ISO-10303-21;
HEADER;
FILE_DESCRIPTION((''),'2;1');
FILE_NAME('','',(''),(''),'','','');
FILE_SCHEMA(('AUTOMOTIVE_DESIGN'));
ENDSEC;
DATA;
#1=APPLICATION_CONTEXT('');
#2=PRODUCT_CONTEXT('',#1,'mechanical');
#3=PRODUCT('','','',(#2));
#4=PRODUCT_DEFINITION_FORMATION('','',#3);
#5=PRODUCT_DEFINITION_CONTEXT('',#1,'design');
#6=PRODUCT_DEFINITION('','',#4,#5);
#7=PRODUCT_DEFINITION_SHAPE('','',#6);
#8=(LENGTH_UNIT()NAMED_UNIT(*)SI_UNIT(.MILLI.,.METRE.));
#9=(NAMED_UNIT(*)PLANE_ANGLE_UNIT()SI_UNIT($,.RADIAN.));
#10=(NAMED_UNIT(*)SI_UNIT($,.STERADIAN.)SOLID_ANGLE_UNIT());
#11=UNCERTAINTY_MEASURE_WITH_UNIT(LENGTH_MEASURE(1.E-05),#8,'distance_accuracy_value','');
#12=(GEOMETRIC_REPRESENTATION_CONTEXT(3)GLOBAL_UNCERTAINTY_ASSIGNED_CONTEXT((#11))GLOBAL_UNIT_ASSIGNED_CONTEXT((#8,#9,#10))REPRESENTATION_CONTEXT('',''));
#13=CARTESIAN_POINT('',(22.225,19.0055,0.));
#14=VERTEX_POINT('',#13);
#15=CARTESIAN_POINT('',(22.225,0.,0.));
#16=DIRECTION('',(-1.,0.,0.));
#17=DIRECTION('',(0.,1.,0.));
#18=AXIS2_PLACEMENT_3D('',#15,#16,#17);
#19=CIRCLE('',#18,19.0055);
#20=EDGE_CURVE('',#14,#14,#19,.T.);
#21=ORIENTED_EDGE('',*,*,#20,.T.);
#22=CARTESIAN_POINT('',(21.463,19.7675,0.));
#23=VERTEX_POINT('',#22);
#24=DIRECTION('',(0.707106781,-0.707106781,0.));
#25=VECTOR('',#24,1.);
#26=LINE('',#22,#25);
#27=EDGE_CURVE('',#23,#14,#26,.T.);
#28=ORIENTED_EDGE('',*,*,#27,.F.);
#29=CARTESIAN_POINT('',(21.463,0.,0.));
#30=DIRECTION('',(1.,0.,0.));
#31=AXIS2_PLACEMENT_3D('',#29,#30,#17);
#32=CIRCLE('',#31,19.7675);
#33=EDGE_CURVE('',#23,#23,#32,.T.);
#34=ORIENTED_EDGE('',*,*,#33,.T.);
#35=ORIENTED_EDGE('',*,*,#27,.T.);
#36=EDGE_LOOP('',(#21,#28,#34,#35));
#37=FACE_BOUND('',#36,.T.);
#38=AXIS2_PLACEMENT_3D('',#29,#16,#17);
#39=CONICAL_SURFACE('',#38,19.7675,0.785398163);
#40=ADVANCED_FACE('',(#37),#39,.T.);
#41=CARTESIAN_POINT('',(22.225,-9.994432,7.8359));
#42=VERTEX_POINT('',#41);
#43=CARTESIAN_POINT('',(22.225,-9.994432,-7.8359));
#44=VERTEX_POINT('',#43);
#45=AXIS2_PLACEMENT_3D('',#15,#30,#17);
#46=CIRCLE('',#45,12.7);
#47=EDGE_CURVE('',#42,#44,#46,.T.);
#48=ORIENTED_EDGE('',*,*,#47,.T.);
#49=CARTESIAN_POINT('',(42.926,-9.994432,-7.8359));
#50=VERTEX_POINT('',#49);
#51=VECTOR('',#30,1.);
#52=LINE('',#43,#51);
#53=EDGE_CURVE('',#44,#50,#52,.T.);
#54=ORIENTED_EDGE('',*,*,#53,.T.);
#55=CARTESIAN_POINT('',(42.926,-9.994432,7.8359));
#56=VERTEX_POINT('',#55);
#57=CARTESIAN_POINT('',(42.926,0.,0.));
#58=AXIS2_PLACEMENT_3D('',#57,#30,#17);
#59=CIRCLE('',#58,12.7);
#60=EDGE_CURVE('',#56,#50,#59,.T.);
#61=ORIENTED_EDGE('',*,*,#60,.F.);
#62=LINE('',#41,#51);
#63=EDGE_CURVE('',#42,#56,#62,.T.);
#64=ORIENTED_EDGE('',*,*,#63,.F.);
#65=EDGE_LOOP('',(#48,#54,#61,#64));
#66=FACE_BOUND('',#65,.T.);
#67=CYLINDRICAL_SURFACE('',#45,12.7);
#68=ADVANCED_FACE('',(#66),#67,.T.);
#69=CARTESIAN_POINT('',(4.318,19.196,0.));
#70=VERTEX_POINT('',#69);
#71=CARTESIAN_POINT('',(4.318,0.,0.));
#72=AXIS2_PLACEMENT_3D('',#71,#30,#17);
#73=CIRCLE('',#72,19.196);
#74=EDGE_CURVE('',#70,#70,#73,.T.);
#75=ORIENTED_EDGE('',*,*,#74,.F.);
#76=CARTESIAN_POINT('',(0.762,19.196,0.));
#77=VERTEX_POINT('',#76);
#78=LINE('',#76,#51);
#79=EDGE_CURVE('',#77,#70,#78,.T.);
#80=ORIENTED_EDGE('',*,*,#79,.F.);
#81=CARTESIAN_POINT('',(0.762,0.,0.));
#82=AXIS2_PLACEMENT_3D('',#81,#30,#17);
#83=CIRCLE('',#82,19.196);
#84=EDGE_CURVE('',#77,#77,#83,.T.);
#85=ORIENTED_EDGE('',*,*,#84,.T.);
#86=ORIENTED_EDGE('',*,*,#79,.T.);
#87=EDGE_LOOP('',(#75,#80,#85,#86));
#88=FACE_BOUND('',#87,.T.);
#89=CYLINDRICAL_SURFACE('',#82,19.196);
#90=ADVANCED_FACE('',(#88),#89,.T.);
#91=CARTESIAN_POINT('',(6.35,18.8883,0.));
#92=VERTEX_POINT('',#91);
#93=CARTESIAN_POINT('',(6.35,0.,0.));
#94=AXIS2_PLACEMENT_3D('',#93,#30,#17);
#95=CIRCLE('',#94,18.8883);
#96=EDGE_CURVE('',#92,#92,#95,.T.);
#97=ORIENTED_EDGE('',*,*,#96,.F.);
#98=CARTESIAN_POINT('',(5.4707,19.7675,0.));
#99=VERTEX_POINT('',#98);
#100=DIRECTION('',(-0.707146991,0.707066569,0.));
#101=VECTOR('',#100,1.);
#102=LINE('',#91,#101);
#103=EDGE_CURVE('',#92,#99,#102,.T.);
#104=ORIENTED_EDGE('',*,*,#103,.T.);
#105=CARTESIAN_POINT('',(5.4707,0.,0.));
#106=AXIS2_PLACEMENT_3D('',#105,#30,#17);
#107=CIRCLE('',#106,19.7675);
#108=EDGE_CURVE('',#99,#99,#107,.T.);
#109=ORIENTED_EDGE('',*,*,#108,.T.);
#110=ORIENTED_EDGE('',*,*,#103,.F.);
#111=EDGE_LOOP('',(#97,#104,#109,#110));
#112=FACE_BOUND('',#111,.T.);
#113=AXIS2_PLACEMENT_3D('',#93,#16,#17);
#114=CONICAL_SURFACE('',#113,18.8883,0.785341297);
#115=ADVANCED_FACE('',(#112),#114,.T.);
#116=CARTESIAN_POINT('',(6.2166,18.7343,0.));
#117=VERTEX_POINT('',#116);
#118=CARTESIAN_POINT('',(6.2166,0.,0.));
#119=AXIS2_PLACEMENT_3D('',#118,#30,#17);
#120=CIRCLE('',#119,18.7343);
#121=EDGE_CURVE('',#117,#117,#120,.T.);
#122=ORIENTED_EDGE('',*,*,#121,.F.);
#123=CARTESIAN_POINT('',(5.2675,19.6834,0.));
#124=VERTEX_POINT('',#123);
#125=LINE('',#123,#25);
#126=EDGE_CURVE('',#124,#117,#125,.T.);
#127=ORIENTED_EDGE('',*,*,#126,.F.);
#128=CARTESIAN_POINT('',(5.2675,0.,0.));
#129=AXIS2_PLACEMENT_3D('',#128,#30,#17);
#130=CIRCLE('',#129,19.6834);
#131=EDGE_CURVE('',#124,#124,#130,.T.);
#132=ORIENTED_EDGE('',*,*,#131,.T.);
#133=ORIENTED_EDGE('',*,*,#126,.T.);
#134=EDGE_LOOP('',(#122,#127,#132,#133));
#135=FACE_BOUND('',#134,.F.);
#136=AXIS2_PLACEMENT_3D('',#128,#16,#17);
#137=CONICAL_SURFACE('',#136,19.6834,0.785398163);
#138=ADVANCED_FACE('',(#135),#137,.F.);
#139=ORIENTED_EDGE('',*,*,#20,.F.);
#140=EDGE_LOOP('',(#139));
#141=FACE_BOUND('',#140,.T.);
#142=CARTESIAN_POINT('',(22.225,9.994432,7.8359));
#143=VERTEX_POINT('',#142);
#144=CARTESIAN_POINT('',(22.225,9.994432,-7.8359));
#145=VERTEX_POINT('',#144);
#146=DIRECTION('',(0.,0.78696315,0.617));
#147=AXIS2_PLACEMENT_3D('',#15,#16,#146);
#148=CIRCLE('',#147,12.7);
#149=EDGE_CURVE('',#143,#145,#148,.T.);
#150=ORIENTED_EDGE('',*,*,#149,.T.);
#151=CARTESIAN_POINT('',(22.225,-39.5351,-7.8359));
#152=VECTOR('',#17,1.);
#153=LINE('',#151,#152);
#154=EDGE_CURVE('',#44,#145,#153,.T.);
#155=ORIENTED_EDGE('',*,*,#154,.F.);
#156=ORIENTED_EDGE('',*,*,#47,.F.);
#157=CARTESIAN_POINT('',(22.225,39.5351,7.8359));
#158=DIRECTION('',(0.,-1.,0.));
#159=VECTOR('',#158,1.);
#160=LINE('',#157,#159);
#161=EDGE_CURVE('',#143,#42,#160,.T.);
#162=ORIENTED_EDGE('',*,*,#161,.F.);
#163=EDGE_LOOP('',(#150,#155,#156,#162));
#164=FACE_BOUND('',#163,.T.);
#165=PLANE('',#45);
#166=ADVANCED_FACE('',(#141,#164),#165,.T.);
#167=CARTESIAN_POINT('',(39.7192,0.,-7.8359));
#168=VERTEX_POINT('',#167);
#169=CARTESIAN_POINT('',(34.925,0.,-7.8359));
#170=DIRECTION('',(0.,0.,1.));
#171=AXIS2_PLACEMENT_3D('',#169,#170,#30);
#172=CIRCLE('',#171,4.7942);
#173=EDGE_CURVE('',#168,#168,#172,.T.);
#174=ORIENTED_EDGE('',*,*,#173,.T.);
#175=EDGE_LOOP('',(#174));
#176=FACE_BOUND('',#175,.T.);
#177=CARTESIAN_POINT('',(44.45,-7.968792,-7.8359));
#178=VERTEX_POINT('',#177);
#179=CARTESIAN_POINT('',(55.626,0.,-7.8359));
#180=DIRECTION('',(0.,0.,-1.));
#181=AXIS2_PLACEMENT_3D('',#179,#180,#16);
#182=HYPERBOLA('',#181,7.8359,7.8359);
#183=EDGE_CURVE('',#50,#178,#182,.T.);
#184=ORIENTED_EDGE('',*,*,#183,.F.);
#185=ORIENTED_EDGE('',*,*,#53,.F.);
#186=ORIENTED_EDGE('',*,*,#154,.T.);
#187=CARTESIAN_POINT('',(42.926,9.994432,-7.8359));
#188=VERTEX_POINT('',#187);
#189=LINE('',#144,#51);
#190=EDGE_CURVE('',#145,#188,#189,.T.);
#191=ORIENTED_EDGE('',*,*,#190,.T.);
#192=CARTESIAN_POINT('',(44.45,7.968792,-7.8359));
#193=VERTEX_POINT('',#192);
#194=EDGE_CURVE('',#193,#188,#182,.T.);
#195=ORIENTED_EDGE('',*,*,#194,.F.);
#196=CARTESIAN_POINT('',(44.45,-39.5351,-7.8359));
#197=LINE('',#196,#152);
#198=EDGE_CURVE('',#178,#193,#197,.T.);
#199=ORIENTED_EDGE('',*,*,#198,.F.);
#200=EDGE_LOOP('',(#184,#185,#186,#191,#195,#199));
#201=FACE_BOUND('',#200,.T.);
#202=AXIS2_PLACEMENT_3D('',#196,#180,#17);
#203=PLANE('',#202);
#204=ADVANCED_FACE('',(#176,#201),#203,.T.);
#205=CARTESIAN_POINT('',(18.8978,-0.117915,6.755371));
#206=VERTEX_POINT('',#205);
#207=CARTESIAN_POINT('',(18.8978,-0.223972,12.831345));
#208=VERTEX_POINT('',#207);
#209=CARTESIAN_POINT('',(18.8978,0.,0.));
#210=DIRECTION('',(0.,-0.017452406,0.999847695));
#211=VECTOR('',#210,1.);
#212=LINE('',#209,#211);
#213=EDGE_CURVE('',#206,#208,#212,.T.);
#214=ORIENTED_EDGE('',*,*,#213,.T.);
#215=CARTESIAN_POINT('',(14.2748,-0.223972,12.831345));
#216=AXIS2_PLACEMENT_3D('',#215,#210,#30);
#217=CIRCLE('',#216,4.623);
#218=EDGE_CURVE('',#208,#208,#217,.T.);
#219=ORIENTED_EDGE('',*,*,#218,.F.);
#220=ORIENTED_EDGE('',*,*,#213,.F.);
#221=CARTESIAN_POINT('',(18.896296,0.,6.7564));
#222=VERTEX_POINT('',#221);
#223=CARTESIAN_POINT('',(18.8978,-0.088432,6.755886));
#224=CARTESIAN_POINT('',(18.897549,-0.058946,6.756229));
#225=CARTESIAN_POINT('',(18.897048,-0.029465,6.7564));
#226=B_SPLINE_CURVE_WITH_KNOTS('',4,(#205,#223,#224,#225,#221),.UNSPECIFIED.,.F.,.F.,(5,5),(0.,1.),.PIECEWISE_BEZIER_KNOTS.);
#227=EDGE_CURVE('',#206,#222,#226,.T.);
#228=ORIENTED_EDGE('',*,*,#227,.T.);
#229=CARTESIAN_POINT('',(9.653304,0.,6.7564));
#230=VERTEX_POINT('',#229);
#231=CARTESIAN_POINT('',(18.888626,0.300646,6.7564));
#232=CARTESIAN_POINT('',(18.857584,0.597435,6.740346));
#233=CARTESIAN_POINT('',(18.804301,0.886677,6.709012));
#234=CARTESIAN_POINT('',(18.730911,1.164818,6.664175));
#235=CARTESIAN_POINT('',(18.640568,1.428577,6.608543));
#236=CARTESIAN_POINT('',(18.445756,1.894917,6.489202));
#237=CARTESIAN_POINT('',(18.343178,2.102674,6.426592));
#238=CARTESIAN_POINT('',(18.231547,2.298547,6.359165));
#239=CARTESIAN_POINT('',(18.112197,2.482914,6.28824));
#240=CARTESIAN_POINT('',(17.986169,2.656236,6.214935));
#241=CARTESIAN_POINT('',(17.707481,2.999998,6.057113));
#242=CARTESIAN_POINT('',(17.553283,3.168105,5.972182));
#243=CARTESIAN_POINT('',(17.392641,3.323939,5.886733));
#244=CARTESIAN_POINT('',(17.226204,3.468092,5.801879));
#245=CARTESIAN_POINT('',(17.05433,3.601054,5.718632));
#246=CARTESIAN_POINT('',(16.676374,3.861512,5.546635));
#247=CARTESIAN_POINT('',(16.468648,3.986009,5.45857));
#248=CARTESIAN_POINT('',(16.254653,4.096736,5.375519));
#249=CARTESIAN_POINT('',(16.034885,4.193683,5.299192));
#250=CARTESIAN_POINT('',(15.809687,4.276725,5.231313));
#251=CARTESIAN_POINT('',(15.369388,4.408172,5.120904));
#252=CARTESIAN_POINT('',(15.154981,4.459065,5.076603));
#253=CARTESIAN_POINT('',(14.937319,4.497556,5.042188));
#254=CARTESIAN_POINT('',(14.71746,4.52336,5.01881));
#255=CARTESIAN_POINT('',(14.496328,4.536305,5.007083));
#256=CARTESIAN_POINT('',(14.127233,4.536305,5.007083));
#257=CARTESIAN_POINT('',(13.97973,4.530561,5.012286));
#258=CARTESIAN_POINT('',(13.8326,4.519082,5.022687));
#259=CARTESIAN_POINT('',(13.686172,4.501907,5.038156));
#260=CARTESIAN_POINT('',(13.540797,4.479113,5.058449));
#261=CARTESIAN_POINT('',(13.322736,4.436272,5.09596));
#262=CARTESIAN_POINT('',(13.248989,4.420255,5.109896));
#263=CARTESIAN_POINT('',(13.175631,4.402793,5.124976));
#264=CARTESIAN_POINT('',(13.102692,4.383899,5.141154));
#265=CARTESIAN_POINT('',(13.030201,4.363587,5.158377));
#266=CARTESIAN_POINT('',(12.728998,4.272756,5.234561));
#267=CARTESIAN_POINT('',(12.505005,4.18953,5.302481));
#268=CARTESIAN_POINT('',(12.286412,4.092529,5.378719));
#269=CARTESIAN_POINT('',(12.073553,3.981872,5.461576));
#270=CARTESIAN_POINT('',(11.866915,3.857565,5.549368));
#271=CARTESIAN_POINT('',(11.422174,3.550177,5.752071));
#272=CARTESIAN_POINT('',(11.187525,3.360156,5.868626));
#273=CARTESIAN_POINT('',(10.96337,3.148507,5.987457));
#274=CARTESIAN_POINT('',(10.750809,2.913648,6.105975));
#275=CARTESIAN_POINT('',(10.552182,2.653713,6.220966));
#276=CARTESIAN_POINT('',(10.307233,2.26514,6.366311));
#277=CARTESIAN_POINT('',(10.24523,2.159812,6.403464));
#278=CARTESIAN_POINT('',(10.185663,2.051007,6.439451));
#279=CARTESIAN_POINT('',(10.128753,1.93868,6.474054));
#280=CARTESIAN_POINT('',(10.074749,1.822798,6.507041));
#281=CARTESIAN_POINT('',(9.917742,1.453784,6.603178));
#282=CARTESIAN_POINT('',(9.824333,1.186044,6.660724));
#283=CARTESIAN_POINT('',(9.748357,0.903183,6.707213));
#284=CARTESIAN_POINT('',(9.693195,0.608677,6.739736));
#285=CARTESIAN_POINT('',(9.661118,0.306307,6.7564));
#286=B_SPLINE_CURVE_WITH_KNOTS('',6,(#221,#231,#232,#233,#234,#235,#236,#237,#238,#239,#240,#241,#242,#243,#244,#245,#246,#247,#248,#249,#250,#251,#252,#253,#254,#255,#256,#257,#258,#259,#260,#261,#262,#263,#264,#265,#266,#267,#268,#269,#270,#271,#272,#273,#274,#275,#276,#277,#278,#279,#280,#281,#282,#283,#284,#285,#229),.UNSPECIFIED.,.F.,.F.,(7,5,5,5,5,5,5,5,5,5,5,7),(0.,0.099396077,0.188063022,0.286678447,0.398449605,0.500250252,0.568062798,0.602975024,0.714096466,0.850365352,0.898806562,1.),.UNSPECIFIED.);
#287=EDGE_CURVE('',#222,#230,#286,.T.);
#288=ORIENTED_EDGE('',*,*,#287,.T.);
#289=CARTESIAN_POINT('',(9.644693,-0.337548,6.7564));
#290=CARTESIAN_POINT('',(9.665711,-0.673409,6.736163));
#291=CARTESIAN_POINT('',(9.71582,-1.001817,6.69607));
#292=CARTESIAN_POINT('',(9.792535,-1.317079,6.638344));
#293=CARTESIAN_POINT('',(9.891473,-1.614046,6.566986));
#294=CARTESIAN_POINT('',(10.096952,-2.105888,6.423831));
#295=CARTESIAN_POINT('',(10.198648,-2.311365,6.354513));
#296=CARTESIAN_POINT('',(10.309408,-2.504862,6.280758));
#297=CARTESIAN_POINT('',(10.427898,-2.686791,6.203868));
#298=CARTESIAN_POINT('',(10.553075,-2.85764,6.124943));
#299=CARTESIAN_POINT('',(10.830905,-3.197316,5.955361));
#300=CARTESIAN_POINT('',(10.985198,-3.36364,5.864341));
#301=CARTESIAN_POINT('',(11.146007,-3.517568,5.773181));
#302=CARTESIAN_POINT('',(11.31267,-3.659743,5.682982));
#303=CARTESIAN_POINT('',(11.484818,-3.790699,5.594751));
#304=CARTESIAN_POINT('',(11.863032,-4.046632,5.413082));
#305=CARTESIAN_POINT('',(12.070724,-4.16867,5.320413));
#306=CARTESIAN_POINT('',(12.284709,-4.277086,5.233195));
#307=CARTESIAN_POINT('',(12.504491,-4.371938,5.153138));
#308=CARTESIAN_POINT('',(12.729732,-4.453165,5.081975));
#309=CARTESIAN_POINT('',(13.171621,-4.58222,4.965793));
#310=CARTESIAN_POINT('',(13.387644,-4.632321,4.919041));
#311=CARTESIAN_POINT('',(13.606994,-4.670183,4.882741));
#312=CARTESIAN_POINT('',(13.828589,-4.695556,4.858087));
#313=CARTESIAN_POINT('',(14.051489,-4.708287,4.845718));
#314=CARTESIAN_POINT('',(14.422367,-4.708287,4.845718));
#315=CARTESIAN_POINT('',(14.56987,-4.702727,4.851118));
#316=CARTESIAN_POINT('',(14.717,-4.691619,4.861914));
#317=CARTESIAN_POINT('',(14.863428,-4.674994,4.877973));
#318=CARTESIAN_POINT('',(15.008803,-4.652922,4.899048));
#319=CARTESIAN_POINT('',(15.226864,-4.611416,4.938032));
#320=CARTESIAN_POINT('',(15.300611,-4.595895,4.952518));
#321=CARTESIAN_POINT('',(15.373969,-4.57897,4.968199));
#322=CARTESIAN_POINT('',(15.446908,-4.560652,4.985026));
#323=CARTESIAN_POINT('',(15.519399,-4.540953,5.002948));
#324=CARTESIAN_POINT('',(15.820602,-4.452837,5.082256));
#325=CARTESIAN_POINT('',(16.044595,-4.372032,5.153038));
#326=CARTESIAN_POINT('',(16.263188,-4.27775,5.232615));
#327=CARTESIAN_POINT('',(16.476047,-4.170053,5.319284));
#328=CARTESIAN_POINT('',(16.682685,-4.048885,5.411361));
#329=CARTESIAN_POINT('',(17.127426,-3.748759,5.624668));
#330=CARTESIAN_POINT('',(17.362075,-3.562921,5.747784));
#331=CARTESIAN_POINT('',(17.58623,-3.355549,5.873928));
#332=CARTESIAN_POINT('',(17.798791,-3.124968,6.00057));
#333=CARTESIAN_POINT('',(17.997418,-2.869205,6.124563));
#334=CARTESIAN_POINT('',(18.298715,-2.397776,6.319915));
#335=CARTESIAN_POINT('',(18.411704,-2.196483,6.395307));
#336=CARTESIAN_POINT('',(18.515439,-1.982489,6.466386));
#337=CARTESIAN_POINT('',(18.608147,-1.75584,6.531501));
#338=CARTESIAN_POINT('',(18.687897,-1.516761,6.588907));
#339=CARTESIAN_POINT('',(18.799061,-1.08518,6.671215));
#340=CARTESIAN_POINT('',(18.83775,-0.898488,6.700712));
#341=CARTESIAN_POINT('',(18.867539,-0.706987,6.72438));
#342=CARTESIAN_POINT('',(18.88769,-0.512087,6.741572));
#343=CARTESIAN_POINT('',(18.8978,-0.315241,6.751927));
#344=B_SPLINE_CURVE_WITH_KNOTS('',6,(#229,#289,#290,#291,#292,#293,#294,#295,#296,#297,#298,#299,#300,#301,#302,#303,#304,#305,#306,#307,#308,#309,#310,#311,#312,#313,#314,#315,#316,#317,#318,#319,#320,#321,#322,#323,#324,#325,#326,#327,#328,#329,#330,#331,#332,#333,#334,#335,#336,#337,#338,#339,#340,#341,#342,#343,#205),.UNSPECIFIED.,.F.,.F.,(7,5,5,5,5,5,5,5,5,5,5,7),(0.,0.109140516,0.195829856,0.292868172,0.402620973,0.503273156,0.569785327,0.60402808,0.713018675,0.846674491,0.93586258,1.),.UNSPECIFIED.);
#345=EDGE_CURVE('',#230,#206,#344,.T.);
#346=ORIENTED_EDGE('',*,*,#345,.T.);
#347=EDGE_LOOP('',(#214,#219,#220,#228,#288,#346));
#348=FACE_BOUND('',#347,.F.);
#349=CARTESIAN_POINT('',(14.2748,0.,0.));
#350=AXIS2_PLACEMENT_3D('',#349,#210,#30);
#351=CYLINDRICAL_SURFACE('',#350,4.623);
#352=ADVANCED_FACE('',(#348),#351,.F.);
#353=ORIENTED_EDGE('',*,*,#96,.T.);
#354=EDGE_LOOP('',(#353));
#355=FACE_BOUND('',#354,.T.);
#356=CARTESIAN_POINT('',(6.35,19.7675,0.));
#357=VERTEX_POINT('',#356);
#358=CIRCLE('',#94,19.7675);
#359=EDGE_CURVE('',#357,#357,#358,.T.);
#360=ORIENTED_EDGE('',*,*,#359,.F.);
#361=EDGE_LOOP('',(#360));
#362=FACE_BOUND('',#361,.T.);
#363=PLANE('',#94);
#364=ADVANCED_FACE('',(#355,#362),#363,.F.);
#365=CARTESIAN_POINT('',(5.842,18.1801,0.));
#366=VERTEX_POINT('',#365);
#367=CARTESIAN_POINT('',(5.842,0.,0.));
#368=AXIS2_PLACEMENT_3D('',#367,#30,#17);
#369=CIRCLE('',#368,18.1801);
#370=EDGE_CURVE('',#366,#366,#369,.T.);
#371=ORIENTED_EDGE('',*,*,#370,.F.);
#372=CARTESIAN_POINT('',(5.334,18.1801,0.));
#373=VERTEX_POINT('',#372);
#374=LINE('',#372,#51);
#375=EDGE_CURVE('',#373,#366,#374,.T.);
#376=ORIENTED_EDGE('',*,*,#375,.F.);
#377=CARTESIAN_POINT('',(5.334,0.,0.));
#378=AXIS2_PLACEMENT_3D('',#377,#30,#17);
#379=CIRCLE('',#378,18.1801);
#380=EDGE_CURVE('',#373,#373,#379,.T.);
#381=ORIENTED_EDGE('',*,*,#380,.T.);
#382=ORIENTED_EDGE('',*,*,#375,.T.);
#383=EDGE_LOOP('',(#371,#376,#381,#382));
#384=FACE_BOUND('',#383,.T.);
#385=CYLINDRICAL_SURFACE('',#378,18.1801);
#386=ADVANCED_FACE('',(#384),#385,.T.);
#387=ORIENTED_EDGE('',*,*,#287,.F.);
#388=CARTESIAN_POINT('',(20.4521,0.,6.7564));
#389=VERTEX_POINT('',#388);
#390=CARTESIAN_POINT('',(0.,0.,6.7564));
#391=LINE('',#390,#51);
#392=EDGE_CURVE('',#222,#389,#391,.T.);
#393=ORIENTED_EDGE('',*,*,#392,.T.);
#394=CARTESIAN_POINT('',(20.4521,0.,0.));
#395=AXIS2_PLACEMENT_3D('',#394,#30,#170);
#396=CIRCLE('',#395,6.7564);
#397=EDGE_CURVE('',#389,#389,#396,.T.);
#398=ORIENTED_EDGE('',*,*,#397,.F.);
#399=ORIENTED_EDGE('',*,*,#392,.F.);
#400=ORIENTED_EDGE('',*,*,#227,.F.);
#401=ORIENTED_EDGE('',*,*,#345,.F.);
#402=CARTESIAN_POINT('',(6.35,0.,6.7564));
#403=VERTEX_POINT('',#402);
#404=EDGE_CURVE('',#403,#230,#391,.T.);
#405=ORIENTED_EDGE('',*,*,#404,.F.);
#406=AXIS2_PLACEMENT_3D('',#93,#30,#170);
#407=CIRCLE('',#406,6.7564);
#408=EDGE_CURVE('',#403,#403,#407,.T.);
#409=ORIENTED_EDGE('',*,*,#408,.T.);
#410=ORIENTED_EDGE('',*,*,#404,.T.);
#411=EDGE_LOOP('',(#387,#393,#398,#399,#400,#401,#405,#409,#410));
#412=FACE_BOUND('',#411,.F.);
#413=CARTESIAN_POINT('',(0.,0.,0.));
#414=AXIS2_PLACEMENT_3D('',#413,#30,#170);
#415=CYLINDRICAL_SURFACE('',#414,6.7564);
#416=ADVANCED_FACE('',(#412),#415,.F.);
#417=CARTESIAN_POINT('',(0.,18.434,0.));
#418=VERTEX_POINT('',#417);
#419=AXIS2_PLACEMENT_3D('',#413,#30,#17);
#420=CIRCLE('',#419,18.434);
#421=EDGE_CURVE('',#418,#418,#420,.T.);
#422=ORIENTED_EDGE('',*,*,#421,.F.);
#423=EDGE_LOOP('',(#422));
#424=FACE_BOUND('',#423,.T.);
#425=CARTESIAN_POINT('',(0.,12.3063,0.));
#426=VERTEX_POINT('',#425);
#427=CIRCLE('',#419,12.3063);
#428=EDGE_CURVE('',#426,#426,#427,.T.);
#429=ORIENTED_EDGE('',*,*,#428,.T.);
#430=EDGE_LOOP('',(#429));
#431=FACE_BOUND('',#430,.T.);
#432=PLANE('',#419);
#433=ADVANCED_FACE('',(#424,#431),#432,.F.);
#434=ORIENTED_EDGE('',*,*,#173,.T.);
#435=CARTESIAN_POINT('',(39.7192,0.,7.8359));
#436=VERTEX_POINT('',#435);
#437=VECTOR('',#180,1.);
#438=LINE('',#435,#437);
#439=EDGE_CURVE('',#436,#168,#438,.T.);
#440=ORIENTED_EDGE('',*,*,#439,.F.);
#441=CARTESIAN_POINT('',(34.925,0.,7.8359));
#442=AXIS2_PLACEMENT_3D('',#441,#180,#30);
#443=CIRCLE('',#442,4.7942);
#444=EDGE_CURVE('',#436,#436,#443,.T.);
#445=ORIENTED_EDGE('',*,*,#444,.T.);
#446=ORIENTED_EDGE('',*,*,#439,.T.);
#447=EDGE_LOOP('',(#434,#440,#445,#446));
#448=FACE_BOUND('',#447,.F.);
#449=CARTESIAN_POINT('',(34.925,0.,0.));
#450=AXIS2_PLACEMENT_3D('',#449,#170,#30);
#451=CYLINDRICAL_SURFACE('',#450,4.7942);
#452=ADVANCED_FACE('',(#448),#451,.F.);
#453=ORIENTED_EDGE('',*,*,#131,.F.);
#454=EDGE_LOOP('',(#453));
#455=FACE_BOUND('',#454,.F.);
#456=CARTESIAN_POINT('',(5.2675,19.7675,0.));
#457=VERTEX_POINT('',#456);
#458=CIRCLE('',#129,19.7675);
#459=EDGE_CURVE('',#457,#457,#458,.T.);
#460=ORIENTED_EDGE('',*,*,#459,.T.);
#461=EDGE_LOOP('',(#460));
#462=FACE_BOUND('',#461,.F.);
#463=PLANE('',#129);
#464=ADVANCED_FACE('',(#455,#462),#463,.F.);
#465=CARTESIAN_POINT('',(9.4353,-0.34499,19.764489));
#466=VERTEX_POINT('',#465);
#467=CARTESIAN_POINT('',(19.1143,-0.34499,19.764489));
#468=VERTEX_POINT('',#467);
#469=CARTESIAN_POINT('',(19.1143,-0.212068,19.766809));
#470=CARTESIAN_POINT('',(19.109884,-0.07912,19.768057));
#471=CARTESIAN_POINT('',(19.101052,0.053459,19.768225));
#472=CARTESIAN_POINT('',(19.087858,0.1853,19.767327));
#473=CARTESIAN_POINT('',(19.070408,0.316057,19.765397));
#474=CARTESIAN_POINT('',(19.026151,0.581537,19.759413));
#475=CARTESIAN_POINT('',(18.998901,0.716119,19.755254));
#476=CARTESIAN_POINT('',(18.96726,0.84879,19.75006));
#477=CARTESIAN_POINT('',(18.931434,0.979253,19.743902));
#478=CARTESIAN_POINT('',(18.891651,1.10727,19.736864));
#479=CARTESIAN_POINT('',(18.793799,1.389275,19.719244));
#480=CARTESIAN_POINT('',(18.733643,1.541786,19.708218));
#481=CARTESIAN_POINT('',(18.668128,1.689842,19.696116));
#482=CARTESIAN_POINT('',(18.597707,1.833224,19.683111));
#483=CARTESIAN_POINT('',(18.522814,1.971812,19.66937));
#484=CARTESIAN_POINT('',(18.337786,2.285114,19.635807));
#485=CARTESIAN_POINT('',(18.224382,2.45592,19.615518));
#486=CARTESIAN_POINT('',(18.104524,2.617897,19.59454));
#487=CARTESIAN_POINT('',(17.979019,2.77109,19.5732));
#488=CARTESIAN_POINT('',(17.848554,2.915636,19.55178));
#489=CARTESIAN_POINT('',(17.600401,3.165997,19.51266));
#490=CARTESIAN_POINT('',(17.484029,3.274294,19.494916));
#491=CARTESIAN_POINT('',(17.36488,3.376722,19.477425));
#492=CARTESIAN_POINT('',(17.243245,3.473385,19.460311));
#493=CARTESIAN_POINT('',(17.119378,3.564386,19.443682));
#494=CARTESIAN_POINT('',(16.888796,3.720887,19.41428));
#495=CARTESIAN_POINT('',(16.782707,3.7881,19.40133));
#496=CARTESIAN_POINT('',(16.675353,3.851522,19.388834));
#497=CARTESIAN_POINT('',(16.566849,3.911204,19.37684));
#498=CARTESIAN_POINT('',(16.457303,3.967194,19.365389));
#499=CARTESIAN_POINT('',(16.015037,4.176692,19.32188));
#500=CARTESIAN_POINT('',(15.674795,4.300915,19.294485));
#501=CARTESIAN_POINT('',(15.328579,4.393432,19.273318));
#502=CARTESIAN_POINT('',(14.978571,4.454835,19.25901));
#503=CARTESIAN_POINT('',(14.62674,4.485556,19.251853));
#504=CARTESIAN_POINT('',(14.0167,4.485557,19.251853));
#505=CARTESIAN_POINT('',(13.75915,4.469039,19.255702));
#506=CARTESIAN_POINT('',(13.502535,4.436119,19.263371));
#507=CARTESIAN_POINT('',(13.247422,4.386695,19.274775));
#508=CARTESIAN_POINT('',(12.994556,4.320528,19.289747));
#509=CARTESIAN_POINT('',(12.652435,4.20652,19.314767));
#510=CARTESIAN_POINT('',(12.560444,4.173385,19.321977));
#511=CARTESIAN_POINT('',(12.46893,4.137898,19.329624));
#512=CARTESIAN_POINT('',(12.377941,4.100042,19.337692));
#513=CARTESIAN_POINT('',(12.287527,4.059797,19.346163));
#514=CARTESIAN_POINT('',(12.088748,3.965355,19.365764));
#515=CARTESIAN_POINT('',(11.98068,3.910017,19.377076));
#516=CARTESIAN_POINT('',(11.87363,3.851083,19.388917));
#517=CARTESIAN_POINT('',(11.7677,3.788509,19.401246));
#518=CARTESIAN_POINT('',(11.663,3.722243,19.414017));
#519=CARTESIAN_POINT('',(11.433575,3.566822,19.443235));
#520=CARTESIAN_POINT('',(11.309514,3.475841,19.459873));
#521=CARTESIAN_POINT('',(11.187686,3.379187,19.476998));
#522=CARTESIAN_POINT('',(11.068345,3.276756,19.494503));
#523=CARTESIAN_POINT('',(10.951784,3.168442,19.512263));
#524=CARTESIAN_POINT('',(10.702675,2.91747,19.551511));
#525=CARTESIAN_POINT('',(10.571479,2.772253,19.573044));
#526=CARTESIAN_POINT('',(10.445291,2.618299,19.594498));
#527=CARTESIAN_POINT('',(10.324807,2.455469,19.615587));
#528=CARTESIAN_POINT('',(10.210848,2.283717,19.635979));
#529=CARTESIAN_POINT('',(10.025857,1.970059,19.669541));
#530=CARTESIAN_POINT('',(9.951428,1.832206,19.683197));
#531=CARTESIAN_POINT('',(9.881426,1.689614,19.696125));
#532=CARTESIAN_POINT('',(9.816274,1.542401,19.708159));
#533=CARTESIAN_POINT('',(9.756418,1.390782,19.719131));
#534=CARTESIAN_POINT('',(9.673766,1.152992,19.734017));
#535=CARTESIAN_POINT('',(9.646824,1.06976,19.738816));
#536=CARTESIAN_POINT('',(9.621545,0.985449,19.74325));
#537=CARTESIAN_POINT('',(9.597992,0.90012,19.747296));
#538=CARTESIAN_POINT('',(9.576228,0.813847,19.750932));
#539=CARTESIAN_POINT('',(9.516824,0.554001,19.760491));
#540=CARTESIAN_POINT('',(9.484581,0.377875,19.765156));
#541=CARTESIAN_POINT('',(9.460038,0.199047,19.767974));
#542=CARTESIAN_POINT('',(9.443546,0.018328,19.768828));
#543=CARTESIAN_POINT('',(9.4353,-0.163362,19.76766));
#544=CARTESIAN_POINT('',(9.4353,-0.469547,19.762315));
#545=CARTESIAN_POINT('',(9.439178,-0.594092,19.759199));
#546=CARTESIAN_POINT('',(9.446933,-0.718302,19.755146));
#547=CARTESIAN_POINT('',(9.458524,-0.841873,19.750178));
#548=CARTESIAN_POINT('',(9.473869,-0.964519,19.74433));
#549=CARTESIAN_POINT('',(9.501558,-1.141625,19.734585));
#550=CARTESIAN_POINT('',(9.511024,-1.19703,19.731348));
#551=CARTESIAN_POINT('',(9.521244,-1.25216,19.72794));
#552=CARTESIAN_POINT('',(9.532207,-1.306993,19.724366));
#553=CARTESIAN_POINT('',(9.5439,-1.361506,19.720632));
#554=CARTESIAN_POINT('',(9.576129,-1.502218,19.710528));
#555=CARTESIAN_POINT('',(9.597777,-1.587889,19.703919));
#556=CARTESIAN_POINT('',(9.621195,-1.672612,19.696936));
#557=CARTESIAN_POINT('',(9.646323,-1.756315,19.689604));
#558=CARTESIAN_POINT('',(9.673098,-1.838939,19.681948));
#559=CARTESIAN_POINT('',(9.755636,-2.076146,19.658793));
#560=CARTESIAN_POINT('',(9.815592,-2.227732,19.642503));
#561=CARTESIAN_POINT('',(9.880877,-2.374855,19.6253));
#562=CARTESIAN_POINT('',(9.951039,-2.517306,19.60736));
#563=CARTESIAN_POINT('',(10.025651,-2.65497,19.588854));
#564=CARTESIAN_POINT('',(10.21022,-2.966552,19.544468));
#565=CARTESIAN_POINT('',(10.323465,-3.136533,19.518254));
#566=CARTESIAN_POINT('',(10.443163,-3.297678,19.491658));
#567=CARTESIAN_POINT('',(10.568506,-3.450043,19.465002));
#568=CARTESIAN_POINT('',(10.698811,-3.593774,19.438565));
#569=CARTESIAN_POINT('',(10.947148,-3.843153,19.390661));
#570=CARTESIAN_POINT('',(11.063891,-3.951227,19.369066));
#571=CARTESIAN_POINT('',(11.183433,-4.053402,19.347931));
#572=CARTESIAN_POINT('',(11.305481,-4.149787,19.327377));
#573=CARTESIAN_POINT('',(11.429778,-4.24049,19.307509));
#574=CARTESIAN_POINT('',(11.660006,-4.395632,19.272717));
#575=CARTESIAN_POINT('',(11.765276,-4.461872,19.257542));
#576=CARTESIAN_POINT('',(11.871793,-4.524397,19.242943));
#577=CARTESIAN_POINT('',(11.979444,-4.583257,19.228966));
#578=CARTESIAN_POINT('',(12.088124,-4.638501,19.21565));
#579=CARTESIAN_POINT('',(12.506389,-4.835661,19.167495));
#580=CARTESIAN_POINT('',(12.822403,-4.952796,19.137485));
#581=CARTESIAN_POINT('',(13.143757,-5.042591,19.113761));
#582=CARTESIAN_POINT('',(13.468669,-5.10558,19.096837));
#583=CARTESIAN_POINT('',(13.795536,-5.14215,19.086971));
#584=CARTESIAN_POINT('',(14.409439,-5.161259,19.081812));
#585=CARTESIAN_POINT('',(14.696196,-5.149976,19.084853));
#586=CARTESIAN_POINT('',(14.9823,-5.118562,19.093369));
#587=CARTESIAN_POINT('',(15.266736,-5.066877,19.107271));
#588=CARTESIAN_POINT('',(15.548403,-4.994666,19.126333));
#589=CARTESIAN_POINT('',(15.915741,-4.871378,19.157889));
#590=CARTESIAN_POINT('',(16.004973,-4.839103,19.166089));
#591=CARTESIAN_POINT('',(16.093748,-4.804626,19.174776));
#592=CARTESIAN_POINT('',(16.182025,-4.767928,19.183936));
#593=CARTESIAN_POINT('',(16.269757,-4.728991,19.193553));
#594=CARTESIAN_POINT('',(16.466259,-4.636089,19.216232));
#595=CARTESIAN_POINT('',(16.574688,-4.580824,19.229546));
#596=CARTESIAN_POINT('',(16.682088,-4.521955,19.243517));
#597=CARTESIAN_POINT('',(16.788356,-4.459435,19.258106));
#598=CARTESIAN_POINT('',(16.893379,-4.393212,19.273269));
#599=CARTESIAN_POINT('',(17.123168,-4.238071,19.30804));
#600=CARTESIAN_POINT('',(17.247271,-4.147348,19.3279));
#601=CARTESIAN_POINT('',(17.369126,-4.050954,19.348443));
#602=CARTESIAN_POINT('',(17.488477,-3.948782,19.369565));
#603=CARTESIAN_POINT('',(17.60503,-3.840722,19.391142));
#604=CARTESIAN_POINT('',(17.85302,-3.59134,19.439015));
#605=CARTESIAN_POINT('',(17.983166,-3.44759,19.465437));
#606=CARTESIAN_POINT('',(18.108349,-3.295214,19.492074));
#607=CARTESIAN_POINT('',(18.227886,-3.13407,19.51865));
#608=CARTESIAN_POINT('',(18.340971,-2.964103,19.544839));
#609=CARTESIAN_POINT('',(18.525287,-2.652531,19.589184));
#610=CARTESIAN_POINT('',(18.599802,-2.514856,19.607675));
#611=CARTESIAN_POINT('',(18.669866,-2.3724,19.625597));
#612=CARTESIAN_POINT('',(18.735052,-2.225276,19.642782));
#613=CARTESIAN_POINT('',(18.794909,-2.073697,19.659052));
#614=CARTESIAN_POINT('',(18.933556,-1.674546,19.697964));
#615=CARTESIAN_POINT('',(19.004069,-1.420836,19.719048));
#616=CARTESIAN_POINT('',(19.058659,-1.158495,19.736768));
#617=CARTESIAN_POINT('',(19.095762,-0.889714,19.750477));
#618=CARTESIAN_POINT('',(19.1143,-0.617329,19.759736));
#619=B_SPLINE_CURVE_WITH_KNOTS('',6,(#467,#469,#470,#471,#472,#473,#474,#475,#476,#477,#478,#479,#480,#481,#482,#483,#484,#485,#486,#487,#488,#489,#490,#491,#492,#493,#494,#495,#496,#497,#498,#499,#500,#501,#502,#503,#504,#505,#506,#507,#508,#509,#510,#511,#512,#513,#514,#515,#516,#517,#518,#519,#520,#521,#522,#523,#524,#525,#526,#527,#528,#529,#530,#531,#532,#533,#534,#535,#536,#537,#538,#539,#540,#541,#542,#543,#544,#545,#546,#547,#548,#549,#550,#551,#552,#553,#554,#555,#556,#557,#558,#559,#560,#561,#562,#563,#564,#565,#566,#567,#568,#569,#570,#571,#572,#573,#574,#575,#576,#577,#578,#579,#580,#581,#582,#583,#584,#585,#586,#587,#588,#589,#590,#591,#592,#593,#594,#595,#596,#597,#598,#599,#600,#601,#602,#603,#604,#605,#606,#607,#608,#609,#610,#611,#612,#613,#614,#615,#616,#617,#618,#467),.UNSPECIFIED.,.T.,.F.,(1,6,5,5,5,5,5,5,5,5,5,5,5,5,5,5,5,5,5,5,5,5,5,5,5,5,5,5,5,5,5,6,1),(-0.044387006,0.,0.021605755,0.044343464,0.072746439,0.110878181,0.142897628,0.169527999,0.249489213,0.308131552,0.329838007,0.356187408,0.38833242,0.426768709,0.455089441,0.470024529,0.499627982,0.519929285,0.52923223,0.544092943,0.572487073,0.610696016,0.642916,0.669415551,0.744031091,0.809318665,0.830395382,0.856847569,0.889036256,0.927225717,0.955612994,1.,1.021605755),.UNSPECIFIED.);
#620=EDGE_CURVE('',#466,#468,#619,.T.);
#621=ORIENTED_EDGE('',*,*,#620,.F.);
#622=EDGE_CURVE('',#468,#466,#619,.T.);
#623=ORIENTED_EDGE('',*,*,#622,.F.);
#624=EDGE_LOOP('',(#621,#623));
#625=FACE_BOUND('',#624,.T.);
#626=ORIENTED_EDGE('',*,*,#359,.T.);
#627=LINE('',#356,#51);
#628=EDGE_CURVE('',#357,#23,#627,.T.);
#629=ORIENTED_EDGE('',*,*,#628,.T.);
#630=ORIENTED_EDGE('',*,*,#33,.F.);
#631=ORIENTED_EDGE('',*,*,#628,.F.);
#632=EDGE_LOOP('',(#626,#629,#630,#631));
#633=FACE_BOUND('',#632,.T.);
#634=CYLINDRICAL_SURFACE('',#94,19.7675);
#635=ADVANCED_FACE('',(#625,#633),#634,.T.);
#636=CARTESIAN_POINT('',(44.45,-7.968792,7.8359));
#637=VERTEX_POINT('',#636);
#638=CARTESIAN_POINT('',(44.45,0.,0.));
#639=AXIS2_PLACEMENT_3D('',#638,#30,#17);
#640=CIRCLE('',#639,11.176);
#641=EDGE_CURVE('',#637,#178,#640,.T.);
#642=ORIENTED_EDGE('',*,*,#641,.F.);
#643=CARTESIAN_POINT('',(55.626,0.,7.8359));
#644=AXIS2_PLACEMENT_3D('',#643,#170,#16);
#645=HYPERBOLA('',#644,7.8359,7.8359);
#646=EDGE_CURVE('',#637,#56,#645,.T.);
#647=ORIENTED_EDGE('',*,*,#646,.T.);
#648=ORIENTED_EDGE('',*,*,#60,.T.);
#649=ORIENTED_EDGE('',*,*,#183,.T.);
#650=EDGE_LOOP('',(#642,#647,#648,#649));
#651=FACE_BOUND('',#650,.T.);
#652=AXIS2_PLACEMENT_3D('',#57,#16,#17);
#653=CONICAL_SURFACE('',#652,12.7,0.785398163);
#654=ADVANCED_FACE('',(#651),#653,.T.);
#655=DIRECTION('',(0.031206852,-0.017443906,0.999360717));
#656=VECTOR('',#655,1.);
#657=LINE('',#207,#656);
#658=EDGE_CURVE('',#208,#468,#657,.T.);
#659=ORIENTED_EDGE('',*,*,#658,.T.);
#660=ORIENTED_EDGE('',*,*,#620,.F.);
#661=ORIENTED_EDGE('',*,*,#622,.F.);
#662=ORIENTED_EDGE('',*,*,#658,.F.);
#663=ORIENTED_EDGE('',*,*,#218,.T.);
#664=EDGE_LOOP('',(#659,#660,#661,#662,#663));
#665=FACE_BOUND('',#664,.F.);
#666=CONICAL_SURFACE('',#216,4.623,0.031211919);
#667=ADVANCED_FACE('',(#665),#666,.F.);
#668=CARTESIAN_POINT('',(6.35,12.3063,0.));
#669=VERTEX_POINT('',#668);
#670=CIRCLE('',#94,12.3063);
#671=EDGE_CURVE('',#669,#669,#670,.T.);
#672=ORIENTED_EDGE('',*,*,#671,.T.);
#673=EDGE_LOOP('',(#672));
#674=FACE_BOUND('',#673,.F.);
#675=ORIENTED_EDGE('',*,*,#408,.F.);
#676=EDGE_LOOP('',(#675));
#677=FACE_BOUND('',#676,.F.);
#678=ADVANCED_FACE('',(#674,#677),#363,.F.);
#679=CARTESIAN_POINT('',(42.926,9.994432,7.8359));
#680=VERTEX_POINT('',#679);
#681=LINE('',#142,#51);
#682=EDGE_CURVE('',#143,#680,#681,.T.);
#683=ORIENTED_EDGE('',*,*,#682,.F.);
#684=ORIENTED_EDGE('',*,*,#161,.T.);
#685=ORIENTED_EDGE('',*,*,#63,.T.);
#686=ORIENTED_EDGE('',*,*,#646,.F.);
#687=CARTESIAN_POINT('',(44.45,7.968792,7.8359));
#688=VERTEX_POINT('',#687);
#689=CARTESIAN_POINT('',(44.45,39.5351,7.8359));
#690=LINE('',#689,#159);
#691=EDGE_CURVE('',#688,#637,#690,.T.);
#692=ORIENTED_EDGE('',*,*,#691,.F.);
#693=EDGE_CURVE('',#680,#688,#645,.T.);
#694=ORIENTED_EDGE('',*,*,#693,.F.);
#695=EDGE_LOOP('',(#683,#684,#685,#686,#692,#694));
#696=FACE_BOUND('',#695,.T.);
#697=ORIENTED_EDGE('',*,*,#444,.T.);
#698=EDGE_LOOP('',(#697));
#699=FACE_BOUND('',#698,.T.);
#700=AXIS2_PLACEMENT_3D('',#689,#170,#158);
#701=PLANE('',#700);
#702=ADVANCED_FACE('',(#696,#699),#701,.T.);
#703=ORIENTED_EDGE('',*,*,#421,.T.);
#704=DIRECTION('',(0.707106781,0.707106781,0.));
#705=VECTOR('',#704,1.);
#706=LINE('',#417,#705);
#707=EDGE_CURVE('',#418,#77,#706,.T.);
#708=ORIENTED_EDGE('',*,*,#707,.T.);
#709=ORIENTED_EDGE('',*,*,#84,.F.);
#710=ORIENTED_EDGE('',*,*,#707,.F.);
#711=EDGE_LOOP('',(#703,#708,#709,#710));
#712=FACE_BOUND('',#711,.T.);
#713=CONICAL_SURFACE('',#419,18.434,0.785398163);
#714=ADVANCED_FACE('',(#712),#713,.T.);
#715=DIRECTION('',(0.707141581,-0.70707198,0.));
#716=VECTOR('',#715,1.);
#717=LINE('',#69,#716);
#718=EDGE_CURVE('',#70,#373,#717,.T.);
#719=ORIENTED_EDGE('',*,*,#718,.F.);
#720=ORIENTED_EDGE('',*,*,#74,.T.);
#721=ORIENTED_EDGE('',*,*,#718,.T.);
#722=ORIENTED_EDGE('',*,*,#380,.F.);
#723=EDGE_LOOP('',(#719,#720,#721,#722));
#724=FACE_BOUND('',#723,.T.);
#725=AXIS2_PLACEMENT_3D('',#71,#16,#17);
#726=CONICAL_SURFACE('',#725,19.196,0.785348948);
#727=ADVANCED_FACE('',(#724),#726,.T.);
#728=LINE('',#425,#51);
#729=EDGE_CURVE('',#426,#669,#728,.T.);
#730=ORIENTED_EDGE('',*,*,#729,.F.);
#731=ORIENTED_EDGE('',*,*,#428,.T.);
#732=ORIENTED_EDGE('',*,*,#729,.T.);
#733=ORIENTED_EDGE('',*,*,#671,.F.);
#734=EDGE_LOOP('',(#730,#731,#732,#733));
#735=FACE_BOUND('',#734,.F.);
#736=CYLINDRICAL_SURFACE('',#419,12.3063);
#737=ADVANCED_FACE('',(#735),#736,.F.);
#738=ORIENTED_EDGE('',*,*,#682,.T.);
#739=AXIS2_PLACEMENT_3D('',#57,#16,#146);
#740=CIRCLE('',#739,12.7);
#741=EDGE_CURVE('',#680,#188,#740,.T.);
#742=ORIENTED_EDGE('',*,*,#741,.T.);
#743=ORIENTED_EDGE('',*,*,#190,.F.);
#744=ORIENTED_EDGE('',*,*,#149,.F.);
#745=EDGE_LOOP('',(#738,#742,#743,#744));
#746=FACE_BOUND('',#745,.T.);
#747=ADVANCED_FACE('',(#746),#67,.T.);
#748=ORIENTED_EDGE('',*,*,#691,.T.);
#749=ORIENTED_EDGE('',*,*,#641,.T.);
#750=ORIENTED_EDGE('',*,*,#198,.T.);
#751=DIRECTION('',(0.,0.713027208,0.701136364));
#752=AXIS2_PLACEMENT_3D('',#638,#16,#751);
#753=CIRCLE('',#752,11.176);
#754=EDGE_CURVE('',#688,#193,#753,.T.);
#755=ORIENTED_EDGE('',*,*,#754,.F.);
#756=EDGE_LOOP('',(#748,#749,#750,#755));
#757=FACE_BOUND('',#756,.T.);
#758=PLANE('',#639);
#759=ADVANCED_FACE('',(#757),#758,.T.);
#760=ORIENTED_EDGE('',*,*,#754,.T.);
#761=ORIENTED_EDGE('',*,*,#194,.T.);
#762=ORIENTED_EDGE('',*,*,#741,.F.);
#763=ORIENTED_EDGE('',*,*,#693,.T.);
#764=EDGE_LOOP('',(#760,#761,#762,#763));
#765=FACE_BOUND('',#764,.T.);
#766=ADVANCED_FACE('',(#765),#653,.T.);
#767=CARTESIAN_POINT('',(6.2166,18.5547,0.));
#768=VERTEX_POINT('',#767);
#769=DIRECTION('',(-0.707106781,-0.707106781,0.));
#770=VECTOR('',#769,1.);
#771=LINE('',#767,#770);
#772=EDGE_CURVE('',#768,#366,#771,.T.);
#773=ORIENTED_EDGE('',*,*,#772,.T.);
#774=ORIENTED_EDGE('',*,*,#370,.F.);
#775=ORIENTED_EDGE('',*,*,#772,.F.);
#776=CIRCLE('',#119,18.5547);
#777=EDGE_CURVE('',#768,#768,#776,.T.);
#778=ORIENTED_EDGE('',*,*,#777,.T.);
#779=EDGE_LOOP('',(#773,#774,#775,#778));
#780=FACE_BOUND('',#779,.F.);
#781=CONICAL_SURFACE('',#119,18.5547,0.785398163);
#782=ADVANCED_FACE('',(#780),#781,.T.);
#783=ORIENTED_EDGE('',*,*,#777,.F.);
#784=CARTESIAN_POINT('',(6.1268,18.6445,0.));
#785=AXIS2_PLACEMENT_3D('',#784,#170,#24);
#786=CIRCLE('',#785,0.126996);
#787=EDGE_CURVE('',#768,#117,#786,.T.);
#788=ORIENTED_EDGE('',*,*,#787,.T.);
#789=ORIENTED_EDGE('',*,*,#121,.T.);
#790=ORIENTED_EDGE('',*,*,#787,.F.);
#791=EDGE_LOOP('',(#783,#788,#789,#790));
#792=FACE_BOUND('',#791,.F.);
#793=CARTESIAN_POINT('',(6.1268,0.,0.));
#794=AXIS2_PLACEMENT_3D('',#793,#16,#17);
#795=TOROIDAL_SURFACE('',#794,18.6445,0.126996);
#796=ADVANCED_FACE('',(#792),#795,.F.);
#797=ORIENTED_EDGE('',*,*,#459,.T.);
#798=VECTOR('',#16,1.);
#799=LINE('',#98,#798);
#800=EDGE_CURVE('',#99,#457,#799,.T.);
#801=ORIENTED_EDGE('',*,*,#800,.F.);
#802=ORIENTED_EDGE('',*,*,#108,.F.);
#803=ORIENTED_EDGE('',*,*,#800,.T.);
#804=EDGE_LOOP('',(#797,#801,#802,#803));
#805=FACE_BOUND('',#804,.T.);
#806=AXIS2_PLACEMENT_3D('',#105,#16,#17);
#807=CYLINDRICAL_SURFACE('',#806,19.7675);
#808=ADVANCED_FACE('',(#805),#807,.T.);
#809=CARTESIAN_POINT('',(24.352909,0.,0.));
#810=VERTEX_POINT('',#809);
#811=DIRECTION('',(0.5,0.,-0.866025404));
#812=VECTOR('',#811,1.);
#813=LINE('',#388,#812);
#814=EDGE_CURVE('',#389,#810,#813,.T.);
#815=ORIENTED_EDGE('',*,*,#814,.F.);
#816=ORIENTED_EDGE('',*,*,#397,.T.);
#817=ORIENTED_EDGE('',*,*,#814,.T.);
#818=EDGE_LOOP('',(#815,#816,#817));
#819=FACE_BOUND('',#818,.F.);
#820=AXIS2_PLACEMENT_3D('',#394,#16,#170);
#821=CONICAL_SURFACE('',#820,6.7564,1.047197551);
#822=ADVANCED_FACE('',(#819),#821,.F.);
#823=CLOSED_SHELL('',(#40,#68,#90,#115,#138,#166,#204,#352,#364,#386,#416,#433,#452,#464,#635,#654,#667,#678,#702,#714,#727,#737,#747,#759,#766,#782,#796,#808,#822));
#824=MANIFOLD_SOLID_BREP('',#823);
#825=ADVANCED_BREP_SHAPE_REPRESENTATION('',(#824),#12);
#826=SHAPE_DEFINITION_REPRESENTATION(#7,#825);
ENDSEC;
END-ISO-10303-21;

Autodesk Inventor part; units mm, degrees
sketch "Sketch_18" plane through (0, 0, 0) normal (0, 0, 1) x (1, 0, 0)
  line L0 (22.225, 0) -> (0, 0)
  line L1 (0, 0) -> (0, 18.434)
  line L2 (0, 18.434) -> (0.762, 19.196)
  line L3 (0.762, 19.196) -> (4.318, 19.196)
  line L4 (4.318, 19.196) -> (5.334, 18.1801)
  line L5 (5.334, 18.1801) -> (6.35, 18.1801)
  line L6 (6.35, 18.1801) -> (6.35, 19.7675)
  line L7 (6.35, 19.7675) -> (21.463, 19.7675)
  line L8 (21.463, 19.7675) -> (22.225, 19.0055)
  line L9 (22.225, 19.0055) -> (22.225, 0)
  line L10 (22.225, 0) -> (0, 0)
revolve "Revolution1" add sketch "Sketch_18" angle 360 about axis through (22.225, 0, 0) along (1, 0, 0)
sketch "Sketch_21" plane through (0, 0, 0) normal (0, 0, 1) x (1, 0, 0)
  line L0 (44.45, 0) -> (22.225, 0)
  line L1 (22.225, 0) -> (22.225, 12.7)
  line L2 (22.225, 12.7) -> (42.926, 12.7)
  line L3 (42.926, 12.7) -> (44.45, 11.176)
  line L4 (44.45, 11.176) -> (44.45, 0)
  line L5 (44.45, 0) -> (22.225, 0)
revolve "Revolution2" add sketch "Sketch_21" angle 360 about axis through (44.45, 0, 0) along (1, 0, 0)
sketch "Sketch_9" plane through (44.45, 0, 0) normal (1, 0, 0) x (0, 0, -1)
  line L0 (-39.5351, -79.0702) -> (39.5351, -79.0702)
  line L1 (39.5351, -79.0702) -> (39.5351, 79.0702)
  line L2 (39.5351, 79.0702) -> (-39.5351, 79.0702)
  line L3 (-39.5351, 79.0702) -> (-39.5351, -79.0702)
  line L4 (-7.8359, -39.5351) -> (7.8359, -39.5351)
  line L5 (7.8359, -39.5351) -> (7.8359, 39.5351)
  line L6 (7.8359, 39.5351) -> (-7.8359, 39.5351)
  line L7 (-7.8359, 39.5351) -> (-7.8359, -39.5351)
extrude "Extrusion1" cut sketch "Sketch_9" against normal blind 22.225
sketch "Sketch4" plane through (0, 0, 0) normal (-1, 0, 0) x (0, 0, 1)
  point P0 (0, 0)
hole "Hole1" at (0, 0, 0) direction (1, 0, 0) diameter 13.5128 depth 20.4521 tip angle 120
sketch "Sketch_68" plane through (0, 0, 0) normal (0, 0.9998477, 0.0174524) x (1, 0, 0)
  line L0 (14.2748, -19.7675) -> (14.2748, 0)
  line L1 (14.2748, 0) -> (18.8978, 0)
  line L2 (18.8978, 0) -> (18.8978, -12.8333)
  line L3 (18.8978, -12.8333) -> (19.1143, -19.7675)
  line L4 (19.1143, -19.7675) -> (14.2748, -19.7675)
  line L5 (14.2748, -19.7675) -> (14.2748, 0)
revolve "Revolution3" cut sketch "Sketch_68" angle 360 about axis through (14.2748, -0.345, 19.7645) along (0, -0.0174524, 0.9998477)
thread "Thread1" size "1/8" designation "1/8 - 27 NPT" standard "NPT" full length
sketch "Sketch_20" plane through (0, 0, 0) normal (0, 0, 1) x (1, 0, 0)
  line L0 (6.35, 0) -> (0, 0)
  line L1 (0, 0) -> (0, 12.3063)
  line L2 (0, 12.3063) -> (6.35, 12.3063)
  line L3 (6.35, 12.3063) -> (6.35, 0)
  line L4 (6.35, 0) -> (0, 0)
revolve "Revolution4" cut sketch "Sketch_20" angle 360 about axis through (6.35, 0, 0) along (1, 0, 0)
sketch "Sketch_24" plane through (0, 0, 0) normal (0, 0, 1) x (1, 0, 0)
  line L0 (6.35, 0) -> (5.334, 0)
  line L1 (5.2675, 19.6834) -> (6.2166, 18.7343)
  arc A0 (6.2166, 18.5547) -> (6.2166, 18.7343) centre (6.1268, 18.6445) ccw
  line L2 (6.2166, 18.5547) -> (5.842, 18.1801)
  line L3 (5.842, 18.1801) -> (5.334, 18.1801)
  line L4 (5.334, 18.1801) -> (5.334, 17.9261)
  line L5 (5.334, 17.9261) -> (6.35, 17.9261)
  line L6 (6.35, 17.9261) -> (6.35, 18.8883)
  line L7 (6.35, 18.8883) -> (5.4707, 19.7675)
  line L8 (5.4707, 19.7675) -> (5.2675, 19.7675)
  line L9 (5.2675, 19.7675) -> (5.2675, 19.6834)
revolve "Revolution5" add sketch "Sketch_24" angle 360 about axis through (6.35, 0, 0) along (1, 0, 0)
sketch "Sketch_43" plane through (0, 0, 0) normal (0, 0, 1) x (1, 0, 0)
  circle A0 centre (34.925, 0) radius 4.7942
extrude "Extrusion2" cut sketch "Sketch_43" along normal mid plane 23.5077
ref_plane "f_XY" through (22.225, 0, 0) normal (0, 0, 1) x (1, 0, 0)
ref_plane "f_YZ" through (22.225, 0, 0) normal (1, 0, 0) x (0, 1, 0)
ref_plane "f_ZX" through (22.225, 0, 0) normal (0, 1, 0) x (0, 0, 1)
ref_plane "lovra1_XY" through (38.1, 0, 0) normal (1, 0, 0) x (0, 0, -1)
ref_plane "lovra1_YZ" through (38.1, 0, 0) normal (0, 0, -1) x (0, 1, 0)
ref_plane "lovra1_ZX" through (38.1, 0, 0) normal (0, 1, 0) x (1, 0, 0)
ref_plane "lovra2_XY" through (38.1, 11.049, 0) normal (1, 0, 0) x (0, 0, -1)
ref_plane "lovra2_YZ" through (38.1, 11.049, 0) normal (0, 0, -1) x (0, 1, 0)
ref_plane "lovra2_ZX" through (38.1, 11.049, 0) normal (0, 1, 0) x (1, 0, 0)
ref_plane "lovra21_XY" through (0, 0, 5.2705) normal (1, 0, 0) x (0, 0, -1)
ref_plane "lovra21_YZ" through (0, 0, 5.2705) normal (0, 0, -1) x (0, 1, 0)
ref_plane "lovra21_ZX" through (0, 0, 5.2705) normal (0, 1, 0) x (1, 0, 0)
ref_plane "lovra22_XY" through (0, 0, -5.2705) normal (1, 0, 0) x (0, 0, -1)
ref_plane "lovra22_YZ" through (0, 0, -5.2705) normal (0, 0, -1) x (0, 1, 0)
ref_plane "lovra22_ZX" through (0, 0, -5.2705) normal (0, 1, 0) x (1, 0, 0)
ref_plane "lovra3_XY" through (38.1, -11.049, 0) normal (1, 0, 0) x (0, 0, -1)
ref_plane "lovra3_YZ" through (38.1, -11.049, 0) normal (0, 0, -1) x (0, 1, 0)
ref_plane "lovra3_ZX" through (38.1, -11.049, 0) normal (0, 1, 0) x (1, 0, 0)
ref_plane "olen_XY" through (34.925, 0, 0) normal (1, 0, 0) x (0, 0, -1)
ref_plane "olen_YZ" through (34.925, 0, 0) normal (0, 0, -1) x (0, 1, 0)
ref_plane "olen_ZX" through (34.925, 0, 0) normal (0, 1, 0) x (1, 0, 0)
ref_plane "p1_XY" through (44.45, 0, 7.8359) normal (1, 0, 0) x (0, 0, -1)
ref_plane "p1_YZ" through (44.45, 0, 7.8359) normal (0, 0, -1) x (0, 1, 0)
ref_plane "p1_ZX" through (44.45, 0, 7.8359) normal (0, 1, 0) x (1, 0, 0)
ref_plane "p2_XY" through (44.45, 0, -7.8359) normal (1, 0, 0) x (0, 0, -1)
ref_plane "p2_YZ" through (44.45, 0, -7.8359) normal (0, 0, -1) x (0, 1, 0)
ref_plane "p2_ZX" through (44.45, 0, -7.8359) normal (0, 1, 0) x (1, 0, 0)
ref_plane "port_XY" through (14.2748, 0, 0) normal (0, 0, 1) x (1, 0, 0)
ref_plane "port_YZ" through (14.2748, 0, 0) normal (1, 0, 0) x (0, 1, 0)
ref_plane "port_ZX" through (14.2748, 0, 0) normal (0, 1, 0) x (0, 0, 1)
ref_plane "port2_XY" through (44.45, 0, 0) normal (1, 0, 0) x (0, 0, -1)
ref_plane "port2_YZ" through (44.45, 0, 0) normal (0, 0, -1) x (0, 1, 0)
ref_plane "port2_ZX" through (44.45, 0, 0) normal (0, 1, 0) x (1, 0, 0)
ref_plane "thd1_XY" through (44.45, 0, 0) normal (1, 0, 0) x (0, 0, -1)
ref_plane "thd1_YZ" through (44.45, 0, 0) normal (0, 0, -1) x (0, 1, 0)
ref_plane "thd1_ZX" through (44.45, 0, 0) normal (0, 1, 0) x (1, 0, 0)
ref_plane "thd2_XY" through (44.45, 0, 0) normal (1, 0, 0) x (0, 0, -1)
ref_plane "thd2_YZ" through (44.45, 0, 0) normal (0, 0, -1) x (0, 1, 0)
ref_plane "thd2_ZX" through (44.45, 0, 0) normal (0, 1, 0) x (1, 0, 0)
ref_plane "to_mounting_bracket_XY" through (22.225, 0, 0) normal (1, 0, 0) x (0, 0, -1)
ref_plane "to_mounting_bracket_YZ" through (22.225, 0, 0) normal (0, 0, -1) x (0, 1, 0)
ref_plane "to_mounting_bracket_ZX" through (22.225, 0, 0) normal (0, 1, 0) x (1, 0, 0)
ref_plane "to_nut_XY" through (0, 0, 0) normal (1, 0, 0) x (0, 0, -1)
ref_plane "to_nut_YZ" through (0, 0, 0) normal (0, 0, -1) x (0, 1, 0)
ref_plane "to_nut_ZX" through (0, 0, 0) normal (0, 1, 0) x (1, 0, 0)
ref_plane "to_pin_XY" through (34.925, 0, 0) normal (0, 0, 1) x (1, 0, 0)
ref_plane "to_pin_YZ" through (34.925, 0, 0) normal (1, 0, 0) x (0, 1, 0)
ref_plane "to_pin_ZX" through (34.925, 0, 0) normal (0, 1, 0) x (0, 0, 1)
ref_plane "to_screw_XY" through (14.2748, 14.2875, -10.0838) normal (0, 1, 0) x (1, 0, 0)
ref_plane "to_screw_YZ" through (14.2748, 14.2875, -10.0838) normal (1, 0, 0) x (0, 0, -1)
ref_plane "to_screw_ZX" through (14.2748, 14.2875, -10.0838) normal (0, 0, -1) x (0, 1, 0)
ref_plane "to_tube_XY" through (5.334, 0, 0) normal (1, 0, 0) x (0, 0, -1)
ref_plane "to_tube_YZ" through (5.334, 0, 0) normal (0, 0, -1) x (0, 1, 0)
ref_plane "to_tube_ZX" through (5.334, 0, 0) normal (0, 1, 0) x (1, 0, 0)
properties part number "17P0000_rear_head" material "Steel"
